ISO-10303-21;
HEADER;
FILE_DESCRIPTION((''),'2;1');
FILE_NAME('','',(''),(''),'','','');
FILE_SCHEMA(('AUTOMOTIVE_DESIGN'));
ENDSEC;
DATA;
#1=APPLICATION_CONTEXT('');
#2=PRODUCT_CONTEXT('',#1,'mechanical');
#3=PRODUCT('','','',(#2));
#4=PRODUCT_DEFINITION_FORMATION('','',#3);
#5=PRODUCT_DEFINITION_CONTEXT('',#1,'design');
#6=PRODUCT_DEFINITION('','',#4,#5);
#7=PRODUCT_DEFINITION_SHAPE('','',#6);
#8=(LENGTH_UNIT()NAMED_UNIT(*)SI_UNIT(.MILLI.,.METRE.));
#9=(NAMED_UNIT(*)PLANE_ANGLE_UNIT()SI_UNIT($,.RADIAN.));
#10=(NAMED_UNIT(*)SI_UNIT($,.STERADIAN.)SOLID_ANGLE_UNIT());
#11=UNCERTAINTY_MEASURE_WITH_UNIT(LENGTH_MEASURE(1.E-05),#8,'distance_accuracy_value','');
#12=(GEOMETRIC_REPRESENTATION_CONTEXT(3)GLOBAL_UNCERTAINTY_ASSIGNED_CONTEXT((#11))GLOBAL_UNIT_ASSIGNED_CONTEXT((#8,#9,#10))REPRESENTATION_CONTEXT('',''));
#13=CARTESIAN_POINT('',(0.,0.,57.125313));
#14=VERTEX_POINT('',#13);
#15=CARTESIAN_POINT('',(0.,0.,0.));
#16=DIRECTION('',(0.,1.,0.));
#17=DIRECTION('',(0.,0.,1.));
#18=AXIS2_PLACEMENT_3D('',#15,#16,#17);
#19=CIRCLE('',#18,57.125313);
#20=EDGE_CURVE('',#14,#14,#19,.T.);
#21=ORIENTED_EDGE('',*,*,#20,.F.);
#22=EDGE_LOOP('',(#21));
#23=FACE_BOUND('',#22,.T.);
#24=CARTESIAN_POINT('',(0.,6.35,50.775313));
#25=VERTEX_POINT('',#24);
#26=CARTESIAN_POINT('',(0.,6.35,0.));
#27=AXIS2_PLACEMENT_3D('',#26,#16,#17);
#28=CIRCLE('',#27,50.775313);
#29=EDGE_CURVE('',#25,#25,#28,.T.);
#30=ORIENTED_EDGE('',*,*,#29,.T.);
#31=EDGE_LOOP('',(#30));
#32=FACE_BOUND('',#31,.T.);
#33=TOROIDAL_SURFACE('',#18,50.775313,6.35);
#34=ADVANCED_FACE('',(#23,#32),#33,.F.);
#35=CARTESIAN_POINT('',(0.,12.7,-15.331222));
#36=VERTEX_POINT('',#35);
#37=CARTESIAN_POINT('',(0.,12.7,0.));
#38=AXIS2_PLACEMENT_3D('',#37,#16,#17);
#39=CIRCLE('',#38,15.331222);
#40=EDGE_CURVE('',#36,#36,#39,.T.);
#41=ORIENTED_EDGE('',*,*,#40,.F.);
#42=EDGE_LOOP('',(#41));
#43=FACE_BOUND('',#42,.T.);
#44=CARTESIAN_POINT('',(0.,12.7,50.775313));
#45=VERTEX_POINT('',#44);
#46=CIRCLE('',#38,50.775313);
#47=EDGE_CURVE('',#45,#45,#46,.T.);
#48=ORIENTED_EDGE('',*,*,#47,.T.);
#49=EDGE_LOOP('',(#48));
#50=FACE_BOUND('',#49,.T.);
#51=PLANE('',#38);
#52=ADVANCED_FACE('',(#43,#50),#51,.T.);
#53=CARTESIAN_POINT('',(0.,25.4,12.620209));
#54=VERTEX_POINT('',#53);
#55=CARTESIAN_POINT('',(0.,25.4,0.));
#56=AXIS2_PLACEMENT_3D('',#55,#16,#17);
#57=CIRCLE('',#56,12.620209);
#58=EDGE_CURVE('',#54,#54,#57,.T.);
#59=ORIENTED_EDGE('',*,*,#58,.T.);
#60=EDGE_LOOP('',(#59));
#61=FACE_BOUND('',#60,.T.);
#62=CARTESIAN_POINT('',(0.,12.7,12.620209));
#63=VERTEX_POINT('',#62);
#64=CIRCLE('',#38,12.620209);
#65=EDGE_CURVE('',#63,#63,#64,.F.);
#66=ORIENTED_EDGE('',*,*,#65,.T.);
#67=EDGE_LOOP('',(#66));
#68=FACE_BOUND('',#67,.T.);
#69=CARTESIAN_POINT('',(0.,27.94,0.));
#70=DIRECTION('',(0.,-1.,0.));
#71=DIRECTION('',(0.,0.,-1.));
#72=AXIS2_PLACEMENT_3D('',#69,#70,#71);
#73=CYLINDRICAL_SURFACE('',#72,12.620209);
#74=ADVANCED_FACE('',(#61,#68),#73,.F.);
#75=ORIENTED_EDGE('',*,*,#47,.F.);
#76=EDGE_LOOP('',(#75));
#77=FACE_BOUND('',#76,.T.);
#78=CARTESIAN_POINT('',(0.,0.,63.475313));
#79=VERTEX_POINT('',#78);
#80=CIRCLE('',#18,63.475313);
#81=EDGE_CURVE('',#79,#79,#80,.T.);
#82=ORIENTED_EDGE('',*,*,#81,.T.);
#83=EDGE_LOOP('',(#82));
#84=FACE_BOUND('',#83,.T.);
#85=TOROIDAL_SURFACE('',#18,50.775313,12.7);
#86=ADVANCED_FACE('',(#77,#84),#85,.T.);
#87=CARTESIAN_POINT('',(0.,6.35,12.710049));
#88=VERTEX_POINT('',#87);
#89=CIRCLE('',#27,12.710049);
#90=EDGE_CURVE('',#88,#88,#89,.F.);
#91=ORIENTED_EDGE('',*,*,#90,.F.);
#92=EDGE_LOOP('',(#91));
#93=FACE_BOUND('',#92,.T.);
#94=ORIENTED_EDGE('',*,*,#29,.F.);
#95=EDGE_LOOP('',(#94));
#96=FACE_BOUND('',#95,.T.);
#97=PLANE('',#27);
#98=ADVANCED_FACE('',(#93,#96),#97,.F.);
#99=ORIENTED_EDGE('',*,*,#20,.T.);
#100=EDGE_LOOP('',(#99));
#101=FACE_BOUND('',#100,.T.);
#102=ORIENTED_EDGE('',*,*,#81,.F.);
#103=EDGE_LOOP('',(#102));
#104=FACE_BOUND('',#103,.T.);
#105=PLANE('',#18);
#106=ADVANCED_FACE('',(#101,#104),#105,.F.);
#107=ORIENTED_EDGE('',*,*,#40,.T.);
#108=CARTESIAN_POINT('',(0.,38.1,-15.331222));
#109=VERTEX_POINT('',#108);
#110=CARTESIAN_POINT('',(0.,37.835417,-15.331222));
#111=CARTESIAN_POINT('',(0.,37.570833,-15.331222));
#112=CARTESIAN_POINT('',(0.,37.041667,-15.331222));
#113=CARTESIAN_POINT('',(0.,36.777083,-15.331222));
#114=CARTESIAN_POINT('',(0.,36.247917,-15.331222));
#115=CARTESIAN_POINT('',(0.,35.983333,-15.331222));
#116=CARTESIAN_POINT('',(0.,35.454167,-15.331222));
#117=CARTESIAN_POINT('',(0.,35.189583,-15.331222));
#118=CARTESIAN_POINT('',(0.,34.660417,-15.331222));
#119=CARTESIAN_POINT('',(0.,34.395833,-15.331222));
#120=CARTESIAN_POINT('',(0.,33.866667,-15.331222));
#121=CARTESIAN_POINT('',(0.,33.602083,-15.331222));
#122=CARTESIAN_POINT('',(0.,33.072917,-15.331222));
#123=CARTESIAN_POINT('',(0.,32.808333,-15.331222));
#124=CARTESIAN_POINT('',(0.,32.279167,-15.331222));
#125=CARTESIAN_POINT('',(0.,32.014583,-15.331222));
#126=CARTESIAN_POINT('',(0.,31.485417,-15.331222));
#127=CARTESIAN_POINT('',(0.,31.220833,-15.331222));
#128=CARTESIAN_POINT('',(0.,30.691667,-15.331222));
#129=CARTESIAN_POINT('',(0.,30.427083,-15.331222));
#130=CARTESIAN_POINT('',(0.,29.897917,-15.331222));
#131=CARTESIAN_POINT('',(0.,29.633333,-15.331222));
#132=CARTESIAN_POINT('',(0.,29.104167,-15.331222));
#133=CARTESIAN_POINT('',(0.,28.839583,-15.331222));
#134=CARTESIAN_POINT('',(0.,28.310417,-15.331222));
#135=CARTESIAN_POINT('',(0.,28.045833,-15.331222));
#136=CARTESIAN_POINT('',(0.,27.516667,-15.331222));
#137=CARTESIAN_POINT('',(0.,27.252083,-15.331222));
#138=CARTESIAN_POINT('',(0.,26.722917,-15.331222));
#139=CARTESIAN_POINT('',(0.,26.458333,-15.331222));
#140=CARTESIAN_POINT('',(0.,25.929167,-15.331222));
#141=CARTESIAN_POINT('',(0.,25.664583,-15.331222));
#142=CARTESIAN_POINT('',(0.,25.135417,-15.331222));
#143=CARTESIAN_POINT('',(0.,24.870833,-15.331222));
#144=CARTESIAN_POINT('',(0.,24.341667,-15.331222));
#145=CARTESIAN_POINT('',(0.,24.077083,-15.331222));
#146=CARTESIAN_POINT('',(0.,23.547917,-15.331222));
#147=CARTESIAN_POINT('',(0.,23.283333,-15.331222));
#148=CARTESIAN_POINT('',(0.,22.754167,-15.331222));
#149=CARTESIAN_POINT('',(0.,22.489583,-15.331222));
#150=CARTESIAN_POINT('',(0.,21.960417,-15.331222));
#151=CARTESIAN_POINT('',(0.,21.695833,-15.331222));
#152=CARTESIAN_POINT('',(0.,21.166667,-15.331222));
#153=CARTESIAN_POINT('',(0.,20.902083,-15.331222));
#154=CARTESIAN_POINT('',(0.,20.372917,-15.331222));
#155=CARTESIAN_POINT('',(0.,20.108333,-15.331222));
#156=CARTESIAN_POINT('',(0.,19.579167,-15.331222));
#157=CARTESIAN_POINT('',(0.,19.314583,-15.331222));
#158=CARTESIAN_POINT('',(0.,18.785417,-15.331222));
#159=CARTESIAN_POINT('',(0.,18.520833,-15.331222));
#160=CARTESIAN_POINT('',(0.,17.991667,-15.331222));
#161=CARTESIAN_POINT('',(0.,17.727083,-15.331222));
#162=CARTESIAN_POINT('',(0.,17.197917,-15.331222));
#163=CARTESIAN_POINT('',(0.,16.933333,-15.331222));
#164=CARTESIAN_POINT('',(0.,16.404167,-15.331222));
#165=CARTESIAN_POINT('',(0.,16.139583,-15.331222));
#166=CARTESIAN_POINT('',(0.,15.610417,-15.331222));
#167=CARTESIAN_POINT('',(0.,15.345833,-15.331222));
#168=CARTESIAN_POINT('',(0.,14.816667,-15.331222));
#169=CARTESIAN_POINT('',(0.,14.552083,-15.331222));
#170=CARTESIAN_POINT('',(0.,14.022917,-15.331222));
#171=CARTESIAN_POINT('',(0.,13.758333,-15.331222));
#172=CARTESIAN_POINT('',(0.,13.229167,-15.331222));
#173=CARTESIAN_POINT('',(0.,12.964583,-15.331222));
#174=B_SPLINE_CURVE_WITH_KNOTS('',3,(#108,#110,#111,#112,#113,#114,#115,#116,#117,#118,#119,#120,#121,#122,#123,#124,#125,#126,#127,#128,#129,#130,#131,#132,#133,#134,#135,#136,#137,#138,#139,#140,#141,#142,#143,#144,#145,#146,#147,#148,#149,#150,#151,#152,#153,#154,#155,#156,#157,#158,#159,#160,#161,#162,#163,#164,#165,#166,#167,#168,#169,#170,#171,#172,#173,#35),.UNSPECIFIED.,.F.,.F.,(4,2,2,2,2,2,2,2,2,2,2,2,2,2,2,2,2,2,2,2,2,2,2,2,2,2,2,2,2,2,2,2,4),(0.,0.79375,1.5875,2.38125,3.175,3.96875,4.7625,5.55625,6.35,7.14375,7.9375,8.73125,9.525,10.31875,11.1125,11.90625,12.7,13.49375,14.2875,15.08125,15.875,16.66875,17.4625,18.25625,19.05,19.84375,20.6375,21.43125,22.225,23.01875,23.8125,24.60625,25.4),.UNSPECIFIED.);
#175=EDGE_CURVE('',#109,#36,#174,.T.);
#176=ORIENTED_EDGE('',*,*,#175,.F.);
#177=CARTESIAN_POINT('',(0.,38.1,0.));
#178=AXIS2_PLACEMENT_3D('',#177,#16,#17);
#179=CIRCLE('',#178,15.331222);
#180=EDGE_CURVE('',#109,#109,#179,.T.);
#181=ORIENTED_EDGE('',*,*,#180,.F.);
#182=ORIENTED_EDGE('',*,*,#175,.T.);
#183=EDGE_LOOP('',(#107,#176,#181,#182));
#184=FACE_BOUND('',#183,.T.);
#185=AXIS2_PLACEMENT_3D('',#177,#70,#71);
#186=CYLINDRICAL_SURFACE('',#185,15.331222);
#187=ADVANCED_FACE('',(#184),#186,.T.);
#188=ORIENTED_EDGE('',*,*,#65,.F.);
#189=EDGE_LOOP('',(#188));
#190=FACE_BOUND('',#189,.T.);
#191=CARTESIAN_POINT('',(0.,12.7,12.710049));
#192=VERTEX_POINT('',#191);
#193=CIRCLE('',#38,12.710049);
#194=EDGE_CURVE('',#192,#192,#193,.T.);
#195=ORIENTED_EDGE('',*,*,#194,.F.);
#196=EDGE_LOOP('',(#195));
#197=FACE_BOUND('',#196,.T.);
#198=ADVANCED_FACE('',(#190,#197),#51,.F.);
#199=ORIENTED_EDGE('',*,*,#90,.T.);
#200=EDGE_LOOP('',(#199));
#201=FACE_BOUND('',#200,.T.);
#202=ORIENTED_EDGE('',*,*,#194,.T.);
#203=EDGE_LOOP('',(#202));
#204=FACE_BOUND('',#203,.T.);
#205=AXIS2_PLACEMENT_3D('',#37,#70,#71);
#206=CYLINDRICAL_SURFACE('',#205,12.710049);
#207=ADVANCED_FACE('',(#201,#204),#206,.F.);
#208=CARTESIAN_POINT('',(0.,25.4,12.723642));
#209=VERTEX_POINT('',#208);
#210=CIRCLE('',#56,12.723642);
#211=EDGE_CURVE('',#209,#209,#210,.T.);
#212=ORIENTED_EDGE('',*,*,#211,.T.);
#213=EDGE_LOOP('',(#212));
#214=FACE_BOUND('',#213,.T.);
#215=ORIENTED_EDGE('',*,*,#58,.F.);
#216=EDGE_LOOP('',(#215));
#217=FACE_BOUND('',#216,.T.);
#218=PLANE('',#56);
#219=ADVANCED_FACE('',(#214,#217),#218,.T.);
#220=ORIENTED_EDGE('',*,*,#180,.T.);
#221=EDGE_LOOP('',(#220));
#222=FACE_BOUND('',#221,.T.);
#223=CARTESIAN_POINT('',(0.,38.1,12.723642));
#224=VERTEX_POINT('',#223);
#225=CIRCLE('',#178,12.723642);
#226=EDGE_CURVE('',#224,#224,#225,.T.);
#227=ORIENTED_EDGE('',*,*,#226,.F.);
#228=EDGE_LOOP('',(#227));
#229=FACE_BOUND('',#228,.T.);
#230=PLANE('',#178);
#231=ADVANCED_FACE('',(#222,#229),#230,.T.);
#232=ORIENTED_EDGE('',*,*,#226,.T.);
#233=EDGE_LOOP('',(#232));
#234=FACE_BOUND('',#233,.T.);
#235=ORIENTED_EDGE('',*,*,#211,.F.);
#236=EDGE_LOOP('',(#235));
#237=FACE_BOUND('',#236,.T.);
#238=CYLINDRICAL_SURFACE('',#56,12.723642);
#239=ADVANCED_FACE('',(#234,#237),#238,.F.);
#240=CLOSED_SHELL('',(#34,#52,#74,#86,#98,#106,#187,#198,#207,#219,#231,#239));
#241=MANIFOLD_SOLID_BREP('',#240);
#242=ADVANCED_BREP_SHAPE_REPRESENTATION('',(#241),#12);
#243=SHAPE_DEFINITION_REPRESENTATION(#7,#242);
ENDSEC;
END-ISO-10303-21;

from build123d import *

# Parameters (mm, degrees)
SKETCH1_R           = 63.475313381
BOSS_EXTRUDE1_DEPTH = 12.7
FILLET2_R           = 12.7
SHELL2_T            = -6.35
SKETCH2_R           = 12.710048884
CUT_EXTRUDE1_DEPTH  = 12.7
SKETCH4_R           = 15.331222423
BOSS_EXTRUDE2_DEPTH = 25.4
SKETCH5_R           = 12.620209495
CUT_EXTRUDE2_DEPTH  = 27.94
SKETCH11_R          = 12.723642388
CUT_EXTRUDE4_DEPTH  = 12.7


with BuildPart() as part:
    # Sketch1 → Boss-Extrude1 (new body)
    with BuildSketch(Plane(origin=(0, 0, 0), x_dir=(1, 0, 0), z_dir=(0, 1, 0))):
        with Locations(Location((0, 0, 0), (0, 0, 270))):
            Circle(SKETCH1_R)
    extrude(amount=BOSS_EXTRUDE1_DEPTH)

    # Fillet2
    fillet2_edges = [part.edges().sort_by_distance(p)[0] for p in [
        (0, 12.7, -63.475313381),
    ]]
    fillet(fillet2_edges, radius=FILLET2_R - 0.0001)  # a hair under: the kernel refuses the full size

    # Shell2
    shell2_openings = [part.faces().sort_by_distance(p)[0] for p in [
        (0, 0, 0),
    ]]
    offset(amount=SHELL2_T, openings=shell2_openings)

    # Sketch2 → Cut-Extrude1 (cut)
    with BuildSketch(Plane(origin=(0, 0, 0), x_dir=(1, 0, 0), z_dir=(0, 1, 0))):
        with Locations(Location((0, 0, 0), (0, 0, 270))):
            Circle(SKETCH2_R)
    extrude(amount=CUT_EXTRUDE1_DEPTH, mode=Mode.SUBTRACT)

    # Sketch4 → Boss-Extrude2 (add)
    with BuildSketch(Plane(origin=(0, 12.7, 0), x_dir=(1, 0, 0), z_dir=(0, 1, 0))):
        with Locations(Location((0, 0, 0), (0, 0, 90))):
            Circle(SKETCH4_R)
    extrude(amount=BOSS_EXTRUDE2_DEPTH)

    # Sketch5 → Cut-Extrude2 (cut)
    with BuildSketch(Plane(origin=(0, 0, 0), x_dir=(1, 0, 0), z_dir=(0, 1, 0))):
        with Locations(Location((0, 0, 0), (0, 0, 270))):
            Circle(SKETCH5_R)
    extrude(amount=CUT_EXTRUDE2_DEPTH, mode=Mode.SUBTRACT)

    # Sketch11 → Cut-Extrude4 (cut)
    with BuildSketch(Plane(origin=(0, 38.1, 0), x_dir=(1, 0, 0), z_dir=(0, 1, 0))):
        with Locations(Location((0, 0, 0), (0, 0, 270))):
            Circle(SKETCH11_R)
    extrude(amount=-CUT_EXTRUDE4_DEPTH, mode=Mode.SUBTRACT)


solid = part.part
